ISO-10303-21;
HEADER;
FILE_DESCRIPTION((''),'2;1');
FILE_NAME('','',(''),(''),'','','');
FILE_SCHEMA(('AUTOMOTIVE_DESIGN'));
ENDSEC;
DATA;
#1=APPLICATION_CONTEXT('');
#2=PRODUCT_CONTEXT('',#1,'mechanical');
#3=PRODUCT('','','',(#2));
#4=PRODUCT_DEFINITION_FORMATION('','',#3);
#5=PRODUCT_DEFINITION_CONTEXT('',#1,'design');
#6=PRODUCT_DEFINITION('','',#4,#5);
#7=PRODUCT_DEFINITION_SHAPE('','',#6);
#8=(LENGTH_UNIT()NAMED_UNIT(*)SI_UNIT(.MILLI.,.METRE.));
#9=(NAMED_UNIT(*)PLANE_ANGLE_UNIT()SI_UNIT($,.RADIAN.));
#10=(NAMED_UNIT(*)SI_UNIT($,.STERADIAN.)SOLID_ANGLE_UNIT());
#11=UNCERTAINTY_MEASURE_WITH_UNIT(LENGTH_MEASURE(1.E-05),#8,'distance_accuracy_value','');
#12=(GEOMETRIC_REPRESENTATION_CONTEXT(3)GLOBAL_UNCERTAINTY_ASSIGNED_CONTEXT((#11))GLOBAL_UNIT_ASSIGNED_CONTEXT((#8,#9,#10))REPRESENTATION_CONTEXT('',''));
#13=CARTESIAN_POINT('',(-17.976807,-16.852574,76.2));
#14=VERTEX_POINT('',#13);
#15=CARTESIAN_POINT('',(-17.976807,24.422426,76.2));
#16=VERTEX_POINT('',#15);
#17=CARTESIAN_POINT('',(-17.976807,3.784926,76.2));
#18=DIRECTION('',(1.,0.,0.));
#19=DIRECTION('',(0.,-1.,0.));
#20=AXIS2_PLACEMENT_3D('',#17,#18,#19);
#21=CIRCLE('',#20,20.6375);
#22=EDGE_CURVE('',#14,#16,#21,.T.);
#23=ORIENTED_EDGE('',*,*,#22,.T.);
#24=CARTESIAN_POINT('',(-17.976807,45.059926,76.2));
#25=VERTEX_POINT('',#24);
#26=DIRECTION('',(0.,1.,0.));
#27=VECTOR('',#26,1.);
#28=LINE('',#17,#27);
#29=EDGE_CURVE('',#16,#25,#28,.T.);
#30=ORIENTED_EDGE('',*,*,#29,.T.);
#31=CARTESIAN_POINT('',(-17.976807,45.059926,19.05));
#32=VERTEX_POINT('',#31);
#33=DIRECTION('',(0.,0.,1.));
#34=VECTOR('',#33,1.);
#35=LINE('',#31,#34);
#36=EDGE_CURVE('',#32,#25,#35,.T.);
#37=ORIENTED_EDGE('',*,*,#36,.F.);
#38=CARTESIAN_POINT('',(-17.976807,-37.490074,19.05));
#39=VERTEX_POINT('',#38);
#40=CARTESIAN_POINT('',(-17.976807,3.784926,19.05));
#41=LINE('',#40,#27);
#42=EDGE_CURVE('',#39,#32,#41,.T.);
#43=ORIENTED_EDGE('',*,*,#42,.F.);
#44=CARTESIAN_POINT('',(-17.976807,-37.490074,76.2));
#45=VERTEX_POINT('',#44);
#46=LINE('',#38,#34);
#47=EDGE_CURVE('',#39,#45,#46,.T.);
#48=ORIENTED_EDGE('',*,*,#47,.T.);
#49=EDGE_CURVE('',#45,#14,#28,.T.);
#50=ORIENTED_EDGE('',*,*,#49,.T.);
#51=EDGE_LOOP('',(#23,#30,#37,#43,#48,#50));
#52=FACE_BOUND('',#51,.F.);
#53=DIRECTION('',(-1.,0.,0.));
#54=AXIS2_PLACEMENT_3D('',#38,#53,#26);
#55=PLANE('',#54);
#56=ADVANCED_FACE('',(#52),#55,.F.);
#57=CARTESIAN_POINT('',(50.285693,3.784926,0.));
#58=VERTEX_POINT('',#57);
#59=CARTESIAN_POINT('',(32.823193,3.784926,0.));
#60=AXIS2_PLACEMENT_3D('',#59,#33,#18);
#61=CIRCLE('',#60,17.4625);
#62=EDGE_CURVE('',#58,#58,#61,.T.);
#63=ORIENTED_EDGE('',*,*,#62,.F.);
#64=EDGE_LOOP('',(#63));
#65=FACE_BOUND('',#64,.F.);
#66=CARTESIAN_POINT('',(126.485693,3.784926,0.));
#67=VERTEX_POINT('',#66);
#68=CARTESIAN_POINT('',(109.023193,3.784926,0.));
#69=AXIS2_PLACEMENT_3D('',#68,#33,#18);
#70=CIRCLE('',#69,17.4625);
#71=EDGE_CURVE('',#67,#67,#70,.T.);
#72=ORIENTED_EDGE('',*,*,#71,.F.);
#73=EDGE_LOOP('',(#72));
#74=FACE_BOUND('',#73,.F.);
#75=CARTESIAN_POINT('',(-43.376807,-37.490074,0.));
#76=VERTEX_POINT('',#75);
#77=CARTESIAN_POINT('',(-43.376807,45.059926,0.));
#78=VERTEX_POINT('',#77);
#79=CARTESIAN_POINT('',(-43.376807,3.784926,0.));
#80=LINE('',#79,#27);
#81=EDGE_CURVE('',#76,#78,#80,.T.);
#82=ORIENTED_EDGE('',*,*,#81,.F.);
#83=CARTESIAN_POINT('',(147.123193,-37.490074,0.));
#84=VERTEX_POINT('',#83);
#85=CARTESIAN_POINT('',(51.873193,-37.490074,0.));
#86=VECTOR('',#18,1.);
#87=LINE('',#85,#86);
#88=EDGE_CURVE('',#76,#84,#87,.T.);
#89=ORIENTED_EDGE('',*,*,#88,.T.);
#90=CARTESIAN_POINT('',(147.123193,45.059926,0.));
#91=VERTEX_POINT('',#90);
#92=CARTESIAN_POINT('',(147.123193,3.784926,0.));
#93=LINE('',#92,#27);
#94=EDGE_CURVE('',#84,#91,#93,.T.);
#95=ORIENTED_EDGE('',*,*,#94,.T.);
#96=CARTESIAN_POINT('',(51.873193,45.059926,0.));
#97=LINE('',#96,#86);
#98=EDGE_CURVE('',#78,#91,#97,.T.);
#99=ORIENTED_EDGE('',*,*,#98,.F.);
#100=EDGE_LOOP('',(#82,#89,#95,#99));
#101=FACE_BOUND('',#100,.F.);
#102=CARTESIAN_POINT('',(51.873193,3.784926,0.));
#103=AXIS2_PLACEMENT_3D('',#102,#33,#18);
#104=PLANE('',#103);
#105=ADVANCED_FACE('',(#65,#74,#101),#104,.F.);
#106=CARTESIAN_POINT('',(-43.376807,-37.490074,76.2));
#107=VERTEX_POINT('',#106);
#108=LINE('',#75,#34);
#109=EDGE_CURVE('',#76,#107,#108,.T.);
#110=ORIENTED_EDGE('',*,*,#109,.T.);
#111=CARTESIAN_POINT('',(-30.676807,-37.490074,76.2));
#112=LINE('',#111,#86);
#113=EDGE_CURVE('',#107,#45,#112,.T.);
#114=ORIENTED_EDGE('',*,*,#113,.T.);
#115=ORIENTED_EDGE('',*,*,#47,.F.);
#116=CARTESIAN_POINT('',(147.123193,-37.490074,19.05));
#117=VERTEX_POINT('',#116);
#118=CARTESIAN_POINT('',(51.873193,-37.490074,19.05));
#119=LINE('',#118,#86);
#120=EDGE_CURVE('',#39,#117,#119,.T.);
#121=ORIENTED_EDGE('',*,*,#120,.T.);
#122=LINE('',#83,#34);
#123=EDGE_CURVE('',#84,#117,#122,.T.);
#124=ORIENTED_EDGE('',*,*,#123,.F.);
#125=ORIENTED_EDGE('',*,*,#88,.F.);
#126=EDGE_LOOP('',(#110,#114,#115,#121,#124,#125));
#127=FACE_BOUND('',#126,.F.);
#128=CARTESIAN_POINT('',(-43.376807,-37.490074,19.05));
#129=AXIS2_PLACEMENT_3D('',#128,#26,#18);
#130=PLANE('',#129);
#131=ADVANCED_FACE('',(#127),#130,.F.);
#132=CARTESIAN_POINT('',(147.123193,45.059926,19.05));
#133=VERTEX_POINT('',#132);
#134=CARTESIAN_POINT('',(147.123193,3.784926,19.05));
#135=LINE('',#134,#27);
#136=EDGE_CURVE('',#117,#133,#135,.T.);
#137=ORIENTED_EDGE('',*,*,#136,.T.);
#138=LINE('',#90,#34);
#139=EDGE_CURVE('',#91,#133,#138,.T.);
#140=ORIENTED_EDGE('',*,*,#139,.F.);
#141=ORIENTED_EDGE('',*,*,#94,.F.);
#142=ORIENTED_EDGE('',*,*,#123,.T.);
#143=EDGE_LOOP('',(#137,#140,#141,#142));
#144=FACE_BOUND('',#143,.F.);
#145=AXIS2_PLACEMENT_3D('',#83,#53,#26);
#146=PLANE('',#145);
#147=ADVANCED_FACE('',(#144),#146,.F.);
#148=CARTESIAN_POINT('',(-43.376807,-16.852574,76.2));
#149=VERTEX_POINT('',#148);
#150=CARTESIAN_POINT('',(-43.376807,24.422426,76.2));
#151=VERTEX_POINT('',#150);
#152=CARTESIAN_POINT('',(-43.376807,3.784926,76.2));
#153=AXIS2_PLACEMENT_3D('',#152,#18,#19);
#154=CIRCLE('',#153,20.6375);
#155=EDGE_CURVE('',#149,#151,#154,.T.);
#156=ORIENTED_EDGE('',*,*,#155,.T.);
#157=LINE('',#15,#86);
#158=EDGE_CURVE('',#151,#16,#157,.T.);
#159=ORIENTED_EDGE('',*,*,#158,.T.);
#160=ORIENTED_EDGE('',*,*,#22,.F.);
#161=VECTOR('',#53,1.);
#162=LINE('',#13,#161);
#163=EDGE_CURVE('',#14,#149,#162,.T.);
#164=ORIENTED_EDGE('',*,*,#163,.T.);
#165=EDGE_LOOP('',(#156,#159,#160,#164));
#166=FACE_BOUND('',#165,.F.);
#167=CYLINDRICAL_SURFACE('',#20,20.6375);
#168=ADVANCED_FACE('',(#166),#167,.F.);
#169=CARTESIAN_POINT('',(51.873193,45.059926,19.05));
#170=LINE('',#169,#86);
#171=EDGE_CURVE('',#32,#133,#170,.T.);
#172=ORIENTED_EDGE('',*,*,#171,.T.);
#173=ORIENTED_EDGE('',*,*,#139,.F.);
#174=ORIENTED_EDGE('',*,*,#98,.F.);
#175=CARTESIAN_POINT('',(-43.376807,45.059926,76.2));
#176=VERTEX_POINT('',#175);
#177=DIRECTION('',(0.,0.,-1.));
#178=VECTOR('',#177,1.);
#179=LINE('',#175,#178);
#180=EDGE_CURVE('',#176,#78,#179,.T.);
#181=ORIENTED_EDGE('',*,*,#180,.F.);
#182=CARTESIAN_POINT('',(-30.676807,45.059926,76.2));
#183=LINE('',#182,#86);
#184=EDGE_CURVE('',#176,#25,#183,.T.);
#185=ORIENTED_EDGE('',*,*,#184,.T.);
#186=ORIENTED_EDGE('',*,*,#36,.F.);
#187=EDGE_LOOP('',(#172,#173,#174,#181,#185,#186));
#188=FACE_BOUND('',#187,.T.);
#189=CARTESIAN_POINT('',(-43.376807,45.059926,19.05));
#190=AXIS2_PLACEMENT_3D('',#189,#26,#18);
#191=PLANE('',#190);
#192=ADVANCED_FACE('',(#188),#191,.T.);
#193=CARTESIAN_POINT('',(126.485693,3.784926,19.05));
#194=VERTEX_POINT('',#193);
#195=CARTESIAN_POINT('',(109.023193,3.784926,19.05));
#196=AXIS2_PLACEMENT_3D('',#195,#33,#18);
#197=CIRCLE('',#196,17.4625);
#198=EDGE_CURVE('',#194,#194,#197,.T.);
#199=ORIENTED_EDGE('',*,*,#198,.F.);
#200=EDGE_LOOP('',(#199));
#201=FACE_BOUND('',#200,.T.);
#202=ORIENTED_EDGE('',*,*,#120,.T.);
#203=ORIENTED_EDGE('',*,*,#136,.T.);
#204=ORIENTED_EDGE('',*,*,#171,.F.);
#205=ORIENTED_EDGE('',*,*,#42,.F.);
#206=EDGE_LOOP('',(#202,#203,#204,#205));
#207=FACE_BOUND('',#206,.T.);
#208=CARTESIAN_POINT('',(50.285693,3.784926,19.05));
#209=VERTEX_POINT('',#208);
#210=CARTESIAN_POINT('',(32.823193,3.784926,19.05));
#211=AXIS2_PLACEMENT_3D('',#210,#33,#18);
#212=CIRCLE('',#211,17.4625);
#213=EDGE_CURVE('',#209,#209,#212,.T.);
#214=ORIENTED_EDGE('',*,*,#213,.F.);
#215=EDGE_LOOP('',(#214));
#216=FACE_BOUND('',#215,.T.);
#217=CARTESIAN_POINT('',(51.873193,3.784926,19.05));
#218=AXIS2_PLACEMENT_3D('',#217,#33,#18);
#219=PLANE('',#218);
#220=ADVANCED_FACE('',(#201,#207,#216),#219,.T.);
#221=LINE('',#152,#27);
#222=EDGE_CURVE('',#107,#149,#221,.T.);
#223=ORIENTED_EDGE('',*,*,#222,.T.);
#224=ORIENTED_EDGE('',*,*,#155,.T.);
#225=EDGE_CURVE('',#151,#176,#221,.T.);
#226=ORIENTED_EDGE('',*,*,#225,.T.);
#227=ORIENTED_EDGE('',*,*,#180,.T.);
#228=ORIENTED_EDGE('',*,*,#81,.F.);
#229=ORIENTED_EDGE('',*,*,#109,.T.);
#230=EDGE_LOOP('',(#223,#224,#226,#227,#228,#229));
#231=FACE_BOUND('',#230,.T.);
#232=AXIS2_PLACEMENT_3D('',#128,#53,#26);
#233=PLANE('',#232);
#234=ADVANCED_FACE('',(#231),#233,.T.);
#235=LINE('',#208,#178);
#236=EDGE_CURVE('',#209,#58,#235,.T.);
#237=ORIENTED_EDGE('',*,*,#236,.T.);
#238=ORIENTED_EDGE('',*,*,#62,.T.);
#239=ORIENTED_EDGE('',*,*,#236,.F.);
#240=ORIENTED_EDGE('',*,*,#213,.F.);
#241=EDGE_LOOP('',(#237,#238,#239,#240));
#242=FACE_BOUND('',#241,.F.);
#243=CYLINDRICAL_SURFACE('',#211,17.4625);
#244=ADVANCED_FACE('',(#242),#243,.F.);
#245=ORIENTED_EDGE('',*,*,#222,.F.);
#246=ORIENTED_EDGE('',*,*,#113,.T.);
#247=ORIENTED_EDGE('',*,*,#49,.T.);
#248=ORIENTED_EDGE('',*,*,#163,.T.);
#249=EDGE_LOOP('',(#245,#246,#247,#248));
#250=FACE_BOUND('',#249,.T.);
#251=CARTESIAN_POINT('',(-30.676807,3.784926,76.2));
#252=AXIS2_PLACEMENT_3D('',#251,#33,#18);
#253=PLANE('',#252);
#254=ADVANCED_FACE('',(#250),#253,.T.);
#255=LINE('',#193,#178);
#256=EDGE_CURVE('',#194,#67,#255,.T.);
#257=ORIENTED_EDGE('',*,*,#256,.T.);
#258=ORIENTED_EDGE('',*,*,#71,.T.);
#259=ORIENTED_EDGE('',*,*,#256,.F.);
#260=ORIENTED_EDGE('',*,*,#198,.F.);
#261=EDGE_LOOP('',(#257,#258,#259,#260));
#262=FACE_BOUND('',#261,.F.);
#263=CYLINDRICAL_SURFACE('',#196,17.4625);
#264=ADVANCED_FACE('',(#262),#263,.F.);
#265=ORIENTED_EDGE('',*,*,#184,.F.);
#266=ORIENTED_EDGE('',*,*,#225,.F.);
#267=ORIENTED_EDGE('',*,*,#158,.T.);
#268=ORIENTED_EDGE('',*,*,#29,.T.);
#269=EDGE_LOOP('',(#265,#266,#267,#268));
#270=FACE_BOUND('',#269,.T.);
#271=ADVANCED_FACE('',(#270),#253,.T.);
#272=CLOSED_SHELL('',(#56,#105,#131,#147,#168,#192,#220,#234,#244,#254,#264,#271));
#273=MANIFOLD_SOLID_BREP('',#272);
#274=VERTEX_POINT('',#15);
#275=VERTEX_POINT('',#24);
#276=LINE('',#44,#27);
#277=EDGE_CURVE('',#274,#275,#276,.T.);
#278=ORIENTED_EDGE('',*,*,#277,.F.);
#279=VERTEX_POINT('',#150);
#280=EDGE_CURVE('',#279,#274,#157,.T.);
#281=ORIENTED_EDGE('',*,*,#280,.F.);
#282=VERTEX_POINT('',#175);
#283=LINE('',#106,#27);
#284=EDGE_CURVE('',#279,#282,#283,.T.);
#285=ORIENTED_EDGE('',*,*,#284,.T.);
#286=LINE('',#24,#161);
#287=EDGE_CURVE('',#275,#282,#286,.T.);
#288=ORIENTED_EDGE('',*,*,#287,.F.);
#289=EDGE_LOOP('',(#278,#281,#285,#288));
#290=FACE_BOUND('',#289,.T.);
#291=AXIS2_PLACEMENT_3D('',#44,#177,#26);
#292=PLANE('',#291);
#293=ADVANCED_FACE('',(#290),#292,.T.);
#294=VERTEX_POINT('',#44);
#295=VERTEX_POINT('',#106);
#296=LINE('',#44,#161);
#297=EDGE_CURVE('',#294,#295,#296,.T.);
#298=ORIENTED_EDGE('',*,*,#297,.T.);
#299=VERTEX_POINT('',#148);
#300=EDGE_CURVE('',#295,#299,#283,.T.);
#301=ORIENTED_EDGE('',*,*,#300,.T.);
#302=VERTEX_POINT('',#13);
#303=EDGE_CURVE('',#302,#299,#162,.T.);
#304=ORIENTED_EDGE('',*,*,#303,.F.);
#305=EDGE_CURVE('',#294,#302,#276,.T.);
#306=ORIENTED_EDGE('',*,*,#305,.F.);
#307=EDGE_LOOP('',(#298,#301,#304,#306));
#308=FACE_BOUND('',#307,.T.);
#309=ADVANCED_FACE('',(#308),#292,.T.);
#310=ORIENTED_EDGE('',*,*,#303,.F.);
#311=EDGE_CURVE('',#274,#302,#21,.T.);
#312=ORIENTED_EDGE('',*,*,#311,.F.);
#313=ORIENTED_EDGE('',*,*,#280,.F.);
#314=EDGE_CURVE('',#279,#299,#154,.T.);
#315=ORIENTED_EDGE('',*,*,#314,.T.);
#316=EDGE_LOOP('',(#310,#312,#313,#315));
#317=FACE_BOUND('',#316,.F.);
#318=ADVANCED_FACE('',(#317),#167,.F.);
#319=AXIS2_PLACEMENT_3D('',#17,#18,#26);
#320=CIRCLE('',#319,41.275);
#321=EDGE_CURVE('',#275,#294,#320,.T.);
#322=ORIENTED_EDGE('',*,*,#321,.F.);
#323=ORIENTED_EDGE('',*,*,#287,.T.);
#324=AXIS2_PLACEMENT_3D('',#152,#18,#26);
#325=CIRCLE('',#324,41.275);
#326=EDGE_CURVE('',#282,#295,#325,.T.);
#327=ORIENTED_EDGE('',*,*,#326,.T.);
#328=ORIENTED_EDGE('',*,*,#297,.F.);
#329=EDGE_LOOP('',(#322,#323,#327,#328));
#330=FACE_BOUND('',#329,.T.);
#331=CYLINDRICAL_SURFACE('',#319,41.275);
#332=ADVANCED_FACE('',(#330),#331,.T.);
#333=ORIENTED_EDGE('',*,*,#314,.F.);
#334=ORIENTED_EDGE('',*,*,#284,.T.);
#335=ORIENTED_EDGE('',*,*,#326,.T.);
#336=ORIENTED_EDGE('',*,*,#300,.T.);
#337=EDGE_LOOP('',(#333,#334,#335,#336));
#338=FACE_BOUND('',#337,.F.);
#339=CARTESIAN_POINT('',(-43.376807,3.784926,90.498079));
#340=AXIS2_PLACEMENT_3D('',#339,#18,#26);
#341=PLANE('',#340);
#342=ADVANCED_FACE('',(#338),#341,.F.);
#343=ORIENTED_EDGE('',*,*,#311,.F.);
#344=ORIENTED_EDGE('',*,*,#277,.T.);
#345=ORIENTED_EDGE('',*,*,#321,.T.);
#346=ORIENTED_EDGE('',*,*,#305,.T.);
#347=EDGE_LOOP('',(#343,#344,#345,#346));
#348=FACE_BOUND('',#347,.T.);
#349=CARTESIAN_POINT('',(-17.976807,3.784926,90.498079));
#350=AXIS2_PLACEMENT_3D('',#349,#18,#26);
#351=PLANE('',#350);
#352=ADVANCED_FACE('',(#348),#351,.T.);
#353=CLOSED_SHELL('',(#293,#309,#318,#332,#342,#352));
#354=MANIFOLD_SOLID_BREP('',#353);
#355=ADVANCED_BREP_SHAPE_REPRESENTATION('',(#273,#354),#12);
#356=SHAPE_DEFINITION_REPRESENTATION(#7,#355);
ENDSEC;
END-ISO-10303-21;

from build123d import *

# Parameters (mm, degrees)
F0_W      = 190.5
F0_H      = 82.55
F1_DEPTH  = 19.05
F2_W      = 25.4
F2_H      = 82.55
F3_DEPTH  = 57.15
F5_DEPTH  = 25.4
F7_DEPTH  = 25.4
F9_DEPTH  = 25.4
F10_R     = 17.4625
F11_DEPTH = 25.4
F12_R     = 17.4625
F13_DEPTH = 25.4


with BuildPart() as f1:
    # F0 (on Top) → F1 (new body)
    with BuildSketch(Plane.XY):
        with Locations((51.8731928766, 3.7849264085)):
            Rectangle(F0_W, F0_H)
    extrude(amount=F1_DEPTH)

    # F2 (on face) → F3 (join)
    with BuildSketch(Plane.XY.offset(19.05)):
        with Locations((-30.6768071234, 3.7849264085)):
            Rectangle(F2_W, F2_H)
    extrude(amount=F3_DEPTH)


with BuildPart() as f5:
    # F4 (on face) → F5 (new body)
    with BuildSketch(Plane.YZ.offset(-17.9768071234)):
        with BuildLine():
            Line((-37.4900735915, 76.2), (45.0599264085, 76.2))
            ThreePointArc((45.0599264085, 76.2), (3.7849264085, 117.475), (-37.4900735915, 76.2))
        make_face()
    extrude(amount=-F5_DEPTH)


with BuildPart() as f7_tool:
    # F6 (on face) → F7 (new body)
    with BuildSketch(Plane.YZ.offset(-17.9768071234)):
        with BuildLine():
            Line((-16.8525735915, 76.2), (24.4224264085, 76.2))
            ThreePointArc((24.4224264085, 76.2), (3.7849264085, 96.8375), (-16.8525735915, 76.2))
        make_face()
        with BuildLine():
            ThreePointArc((-16.8525735915, 76.2), (3.7849264085, 55.5625), (24.4224264085, 76.2))
            Line((24.4224264085, 76.2), (-16.8525735915, 76.2))
        make_face()
    extrude(amount=-F7_DEPTH)


with BuildPart() as f1_1:
    add(f1.part)

    # F7: cut by f7_tool
    add(f7_tool.part, mode=Mode.SUBTRACT)

    # F8 (on face) → F9 (cut)
    with BuildSketch(Plane.YZ.offset(-17.9768071234)):
        with BuildLine():
            ThreePointArc((-16.8525735915, 76.2), (3.7849264085, 55.5625), (24.4224264085, 76.2))
            ThreePointArc((24.4224264085, 76.2), (3.7849264085, 96.8375), (-16.8525735915, 76.2))
        make_face()
    extrude(amount=-F9_DEPTH, mode=Mode.SUBTRACT)

    # F10 (on face) → F11 (cut)
    with BuildSketch(Plane.XY.offset(19.05)):
        with Locations((109.0231928766, 3.7849264085)):
            Circle(F10_R)
    extrude(amount=-F11_DEPTH, mode=Mode.SUBTRACT)

    # F12 (on face) → F13 (cut)
    with BuildSketch(Plane.XY.offset(19.05)):
        with Locations((32.8231928766, 3.7849264085)):
            Circle(F12_R)
    extrude(amount=-F13_DEPTH, mode=Mode.SUBTRACT)


with BuildPart() as f5_1:
    add(f5.part)

    # F7: cut by f7_tool
    add(f7_tool.part, mode=Mode.SUBTRACT)


solid = Compound([f1_1.part, f5_1.part])
